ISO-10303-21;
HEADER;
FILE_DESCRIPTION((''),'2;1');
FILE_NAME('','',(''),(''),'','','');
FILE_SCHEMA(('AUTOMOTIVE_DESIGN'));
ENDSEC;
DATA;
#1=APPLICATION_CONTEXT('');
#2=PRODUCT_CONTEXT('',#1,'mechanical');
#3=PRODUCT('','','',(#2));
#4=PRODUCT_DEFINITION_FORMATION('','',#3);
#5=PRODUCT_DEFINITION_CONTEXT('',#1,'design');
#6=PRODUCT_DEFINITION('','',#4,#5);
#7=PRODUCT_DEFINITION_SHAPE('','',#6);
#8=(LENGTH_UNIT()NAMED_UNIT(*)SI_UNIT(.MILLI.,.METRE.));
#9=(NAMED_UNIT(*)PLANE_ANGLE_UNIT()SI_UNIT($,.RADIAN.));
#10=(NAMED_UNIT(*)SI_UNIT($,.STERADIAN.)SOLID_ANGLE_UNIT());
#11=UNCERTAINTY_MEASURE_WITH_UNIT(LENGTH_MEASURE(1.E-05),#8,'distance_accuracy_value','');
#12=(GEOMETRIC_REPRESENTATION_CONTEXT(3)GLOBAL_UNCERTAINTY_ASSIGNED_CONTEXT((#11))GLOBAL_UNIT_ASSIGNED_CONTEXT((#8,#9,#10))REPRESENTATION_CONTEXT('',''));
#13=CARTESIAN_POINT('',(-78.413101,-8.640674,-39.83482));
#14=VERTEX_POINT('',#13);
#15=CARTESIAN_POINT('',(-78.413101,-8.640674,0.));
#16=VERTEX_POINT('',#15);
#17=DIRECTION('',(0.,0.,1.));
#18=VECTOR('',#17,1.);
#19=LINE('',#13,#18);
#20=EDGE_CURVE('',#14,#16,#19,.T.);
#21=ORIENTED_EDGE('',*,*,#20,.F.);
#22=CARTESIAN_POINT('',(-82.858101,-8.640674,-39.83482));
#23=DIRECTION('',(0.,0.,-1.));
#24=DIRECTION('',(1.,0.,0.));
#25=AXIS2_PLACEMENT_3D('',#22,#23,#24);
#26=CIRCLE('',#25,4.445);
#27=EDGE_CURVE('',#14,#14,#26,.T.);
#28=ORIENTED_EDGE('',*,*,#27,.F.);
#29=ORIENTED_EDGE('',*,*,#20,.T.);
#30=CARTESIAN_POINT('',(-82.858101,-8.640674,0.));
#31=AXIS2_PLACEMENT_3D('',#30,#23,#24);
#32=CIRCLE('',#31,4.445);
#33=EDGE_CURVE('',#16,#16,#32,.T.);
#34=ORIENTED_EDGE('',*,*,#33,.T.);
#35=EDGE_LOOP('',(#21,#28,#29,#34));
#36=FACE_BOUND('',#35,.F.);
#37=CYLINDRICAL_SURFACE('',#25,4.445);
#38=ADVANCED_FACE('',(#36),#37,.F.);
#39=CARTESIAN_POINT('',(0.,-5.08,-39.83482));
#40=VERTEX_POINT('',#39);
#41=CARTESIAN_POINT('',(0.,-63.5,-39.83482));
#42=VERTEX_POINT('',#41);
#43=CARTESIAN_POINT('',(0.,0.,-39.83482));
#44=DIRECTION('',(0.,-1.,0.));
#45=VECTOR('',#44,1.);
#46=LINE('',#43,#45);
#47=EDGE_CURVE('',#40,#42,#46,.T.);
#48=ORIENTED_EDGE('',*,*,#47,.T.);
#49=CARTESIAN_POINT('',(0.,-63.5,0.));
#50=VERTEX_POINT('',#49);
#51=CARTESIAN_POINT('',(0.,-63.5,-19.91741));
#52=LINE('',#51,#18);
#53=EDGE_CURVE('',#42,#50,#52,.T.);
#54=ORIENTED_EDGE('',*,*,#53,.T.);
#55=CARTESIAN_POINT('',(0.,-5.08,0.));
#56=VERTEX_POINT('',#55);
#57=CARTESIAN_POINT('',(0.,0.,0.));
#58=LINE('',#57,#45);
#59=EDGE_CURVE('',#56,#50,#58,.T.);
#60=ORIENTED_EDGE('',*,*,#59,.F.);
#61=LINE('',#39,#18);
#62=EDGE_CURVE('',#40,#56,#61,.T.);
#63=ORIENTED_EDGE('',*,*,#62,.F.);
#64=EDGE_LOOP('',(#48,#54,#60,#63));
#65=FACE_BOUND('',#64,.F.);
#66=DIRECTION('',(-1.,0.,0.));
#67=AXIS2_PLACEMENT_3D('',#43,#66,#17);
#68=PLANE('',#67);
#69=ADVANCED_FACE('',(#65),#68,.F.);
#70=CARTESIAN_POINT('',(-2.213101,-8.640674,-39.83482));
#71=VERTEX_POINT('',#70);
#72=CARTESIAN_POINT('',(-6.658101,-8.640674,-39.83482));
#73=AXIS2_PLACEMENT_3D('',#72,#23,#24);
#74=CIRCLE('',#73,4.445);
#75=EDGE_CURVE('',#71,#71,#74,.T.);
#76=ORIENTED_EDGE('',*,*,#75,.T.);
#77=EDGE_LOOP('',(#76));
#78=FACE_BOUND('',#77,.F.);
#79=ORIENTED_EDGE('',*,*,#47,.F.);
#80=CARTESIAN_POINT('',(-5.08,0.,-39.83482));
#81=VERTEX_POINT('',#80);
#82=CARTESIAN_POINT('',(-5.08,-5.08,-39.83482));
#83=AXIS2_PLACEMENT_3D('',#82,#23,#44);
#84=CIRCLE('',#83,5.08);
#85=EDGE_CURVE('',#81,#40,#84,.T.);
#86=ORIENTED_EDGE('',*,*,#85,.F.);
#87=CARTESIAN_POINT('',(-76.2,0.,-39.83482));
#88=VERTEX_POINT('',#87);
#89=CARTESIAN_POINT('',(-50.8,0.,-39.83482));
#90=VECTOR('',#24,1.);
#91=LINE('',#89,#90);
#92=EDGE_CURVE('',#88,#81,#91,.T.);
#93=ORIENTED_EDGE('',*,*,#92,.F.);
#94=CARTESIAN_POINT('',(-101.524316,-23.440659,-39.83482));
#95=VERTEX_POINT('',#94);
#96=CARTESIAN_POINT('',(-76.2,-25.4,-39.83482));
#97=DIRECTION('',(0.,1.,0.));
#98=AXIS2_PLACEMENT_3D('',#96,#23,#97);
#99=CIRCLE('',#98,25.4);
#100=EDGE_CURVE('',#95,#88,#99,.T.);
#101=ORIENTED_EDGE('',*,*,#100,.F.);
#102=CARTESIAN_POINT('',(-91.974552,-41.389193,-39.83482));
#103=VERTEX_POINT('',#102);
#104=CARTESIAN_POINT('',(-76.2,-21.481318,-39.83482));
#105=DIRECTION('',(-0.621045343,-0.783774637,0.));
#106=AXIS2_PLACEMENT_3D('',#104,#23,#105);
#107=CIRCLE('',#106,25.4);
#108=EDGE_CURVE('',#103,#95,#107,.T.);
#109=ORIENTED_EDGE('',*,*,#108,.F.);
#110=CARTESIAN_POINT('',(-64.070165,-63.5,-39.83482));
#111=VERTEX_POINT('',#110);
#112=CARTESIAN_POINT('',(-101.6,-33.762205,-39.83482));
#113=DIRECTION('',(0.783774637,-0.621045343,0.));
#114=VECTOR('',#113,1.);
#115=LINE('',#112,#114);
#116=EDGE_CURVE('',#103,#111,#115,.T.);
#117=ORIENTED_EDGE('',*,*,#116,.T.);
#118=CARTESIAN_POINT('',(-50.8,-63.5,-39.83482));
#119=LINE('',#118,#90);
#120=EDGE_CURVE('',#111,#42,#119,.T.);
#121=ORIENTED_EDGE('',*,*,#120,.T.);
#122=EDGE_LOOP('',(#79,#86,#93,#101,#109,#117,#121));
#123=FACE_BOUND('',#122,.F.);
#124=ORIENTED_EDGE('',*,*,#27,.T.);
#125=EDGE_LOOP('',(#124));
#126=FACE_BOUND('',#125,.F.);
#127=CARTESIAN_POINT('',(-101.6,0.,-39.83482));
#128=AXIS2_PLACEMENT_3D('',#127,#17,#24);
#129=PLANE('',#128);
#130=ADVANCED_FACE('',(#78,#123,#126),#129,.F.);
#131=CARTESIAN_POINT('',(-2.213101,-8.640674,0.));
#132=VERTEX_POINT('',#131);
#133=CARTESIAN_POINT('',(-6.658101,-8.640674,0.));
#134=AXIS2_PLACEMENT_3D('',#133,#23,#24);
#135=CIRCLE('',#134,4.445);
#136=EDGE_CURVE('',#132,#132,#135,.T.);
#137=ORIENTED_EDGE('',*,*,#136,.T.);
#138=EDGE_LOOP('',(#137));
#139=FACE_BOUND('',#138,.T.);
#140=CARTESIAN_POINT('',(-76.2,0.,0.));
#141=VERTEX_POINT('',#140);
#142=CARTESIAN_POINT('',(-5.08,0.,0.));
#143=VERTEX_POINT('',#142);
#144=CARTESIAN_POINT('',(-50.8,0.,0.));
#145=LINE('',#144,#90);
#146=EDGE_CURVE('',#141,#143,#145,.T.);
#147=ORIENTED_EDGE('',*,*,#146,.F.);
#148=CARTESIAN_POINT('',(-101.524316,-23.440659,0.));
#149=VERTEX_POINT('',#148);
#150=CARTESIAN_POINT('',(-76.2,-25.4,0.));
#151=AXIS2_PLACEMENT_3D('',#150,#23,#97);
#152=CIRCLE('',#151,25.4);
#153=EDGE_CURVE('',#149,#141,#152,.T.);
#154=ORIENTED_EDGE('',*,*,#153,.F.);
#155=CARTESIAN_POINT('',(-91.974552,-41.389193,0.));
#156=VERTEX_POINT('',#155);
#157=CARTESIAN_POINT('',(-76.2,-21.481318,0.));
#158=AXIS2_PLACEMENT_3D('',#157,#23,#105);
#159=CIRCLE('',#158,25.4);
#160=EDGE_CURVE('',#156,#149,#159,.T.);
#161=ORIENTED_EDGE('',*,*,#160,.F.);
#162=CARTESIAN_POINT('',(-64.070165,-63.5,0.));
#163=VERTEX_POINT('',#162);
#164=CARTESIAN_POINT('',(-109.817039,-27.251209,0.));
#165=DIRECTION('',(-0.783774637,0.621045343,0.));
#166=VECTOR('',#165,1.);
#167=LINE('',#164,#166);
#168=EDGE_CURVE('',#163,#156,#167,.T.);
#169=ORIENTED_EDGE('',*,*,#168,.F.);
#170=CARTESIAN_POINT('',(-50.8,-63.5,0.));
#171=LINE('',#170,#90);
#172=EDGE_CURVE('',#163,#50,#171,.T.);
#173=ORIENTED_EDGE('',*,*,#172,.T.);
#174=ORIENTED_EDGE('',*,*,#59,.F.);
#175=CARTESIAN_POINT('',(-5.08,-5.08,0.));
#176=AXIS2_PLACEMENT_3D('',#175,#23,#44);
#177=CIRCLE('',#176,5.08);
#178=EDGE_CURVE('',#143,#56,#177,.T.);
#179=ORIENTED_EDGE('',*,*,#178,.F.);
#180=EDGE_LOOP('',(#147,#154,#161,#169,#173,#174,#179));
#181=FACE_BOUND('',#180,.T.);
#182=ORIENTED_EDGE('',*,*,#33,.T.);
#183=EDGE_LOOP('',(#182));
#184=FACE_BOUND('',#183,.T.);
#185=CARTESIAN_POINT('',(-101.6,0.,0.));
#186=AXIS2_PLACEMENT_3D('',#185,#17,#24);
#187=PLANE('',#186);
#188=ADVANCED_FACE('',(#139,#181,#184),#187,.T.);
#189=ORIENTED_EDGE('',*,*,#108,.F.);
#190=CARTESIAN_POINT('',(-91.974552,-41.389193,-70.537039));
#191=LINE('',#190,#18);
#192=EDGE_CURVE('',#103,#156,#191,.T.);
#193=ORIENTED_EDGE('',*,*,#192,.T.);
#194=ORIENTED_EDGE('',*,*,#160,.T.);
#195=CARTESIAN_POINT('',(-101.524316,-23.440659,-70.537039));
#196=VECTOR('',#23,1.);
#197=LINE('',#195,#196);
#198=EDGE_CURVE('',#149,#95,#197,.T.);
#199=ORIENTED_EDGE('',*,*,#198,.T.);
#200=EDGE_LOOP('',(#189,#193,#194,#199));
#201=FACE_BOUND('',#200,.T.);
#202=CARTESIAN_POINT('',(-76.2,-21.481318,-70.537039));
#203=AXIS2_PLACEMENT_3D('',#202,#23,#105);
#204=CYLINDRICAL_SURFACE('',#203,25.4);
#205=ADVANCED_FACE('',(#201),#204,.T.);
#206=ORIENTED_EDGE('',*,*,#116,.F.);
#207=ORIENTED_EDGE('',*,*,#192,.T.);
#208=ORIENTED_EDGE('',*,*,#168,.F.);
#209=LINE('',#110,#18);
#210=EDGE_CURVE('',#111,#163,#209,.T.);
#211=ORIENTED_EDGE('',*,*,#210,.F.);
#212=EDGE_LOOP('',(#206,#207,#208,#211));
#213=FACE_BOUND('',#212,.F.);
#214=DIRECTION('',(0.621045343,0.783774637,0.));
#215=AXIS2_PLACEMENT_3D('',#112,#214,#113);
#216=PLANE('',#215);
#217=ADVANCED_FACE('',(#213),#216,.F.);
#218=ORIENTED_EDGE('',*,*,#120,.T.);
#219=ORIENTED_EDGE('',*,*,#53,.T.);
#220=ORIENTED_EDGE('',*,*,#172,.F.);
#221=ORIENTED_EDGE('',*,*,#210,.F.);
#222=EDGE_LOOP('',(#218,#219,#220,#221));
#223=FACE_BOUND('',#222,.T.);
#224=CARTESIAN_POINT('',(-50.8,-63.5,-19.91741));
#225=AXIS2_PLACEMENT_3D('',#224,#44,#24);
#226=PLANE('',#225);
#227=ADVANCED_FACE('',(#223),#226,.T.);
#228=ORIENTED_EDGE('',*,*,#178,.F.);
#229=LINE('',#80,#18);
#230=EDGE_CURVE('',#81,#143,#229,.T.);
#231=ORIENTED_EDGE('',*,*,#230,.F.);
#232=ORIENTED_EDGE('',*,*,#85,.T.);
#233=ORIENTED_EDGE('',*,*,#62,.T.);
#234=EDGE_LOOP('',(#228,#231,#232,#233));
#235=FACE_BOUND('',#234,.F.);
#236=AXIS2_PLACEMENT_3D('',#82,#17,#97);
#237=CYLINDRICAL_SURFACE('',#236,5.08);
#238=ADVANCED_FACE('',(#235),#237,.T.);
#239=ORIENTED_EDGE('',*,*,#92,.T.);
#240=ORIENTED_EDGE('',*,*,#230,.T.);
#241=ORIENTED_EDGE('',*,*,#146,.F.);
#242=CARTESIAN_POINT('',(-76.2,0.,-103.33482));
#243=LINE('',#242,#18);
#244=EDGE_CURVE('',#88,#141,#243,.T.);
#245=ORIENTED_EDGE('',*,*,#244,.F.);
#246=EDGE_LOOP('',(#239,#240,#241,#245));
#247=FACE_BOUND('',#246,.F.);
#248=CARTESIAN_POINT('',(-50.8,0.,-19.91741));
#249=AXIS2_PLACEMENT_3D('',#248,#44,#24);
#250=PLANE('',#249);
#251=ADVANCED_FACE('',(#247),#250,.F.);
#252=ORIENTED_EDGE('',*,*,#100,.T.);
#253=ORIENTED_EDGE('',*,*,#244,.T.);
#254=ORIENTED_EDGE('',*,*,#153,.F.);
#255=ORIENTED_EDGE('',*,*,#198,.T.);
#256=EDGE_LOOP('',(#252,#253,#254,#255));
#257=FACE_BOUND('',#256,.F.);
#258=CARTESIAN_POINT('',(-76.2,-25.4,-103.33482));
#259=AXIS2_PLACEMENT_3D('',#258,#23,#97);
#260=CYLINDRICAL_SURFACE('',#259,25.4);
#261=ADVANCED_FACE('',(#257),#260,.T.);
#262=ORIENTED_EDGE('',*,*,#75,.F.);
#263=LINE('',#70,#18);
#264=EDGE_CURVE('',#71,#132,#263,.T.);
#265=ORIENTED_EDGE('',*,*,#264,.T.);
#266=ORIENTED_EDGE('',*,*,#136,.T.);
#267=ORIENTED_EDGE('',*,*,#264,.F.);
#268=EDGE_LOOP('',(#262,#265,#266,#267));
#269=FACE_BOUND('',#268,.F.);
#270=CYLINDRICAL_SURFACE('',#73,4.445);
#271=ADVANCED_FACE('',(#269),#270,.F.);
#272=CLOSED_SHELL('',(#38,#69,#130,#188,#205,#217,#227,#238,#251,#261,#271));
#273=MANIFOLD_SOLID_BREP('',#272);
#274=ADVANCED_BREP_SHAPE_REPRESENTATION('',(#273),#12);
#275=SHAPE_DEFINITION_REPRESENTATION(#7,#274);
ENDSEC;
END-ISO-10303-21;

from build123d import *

# Parameters (mm, degrees)
F0_W        = 101.6
F0_H        = 39.83482
F1_DEPTH    = 63.5
F3_DEPTH    = 106.68
F4_T1_DEPTH = 101.2392583659
F4_T3_DEPTH = 166.83482
F5_R        = 5.08
F6_R        = 4.445
F7_DEPTH    = 50.8


# Not quite as in the source:
# - a fillet or chamfer that OpenCascade refuses, or shapes differently, is made with other operations: its cross-section is extruded or revolved along the edge and cut away or added


with BuildPart() as f1:
    # F0 (on Front) → F1 (new body)
    with BuildSketch(Plane.XZ):
        with Locations((-50.8, -19.91741)):
            Rectangle(F0_W, F0_H)
    extrude(amount=F1_DEPTH)

    # F2 (on face) → F3 (cut)
    with BuildSketch(Plane(origin=(0, 0, -39.83482), x_dir=(1, 0, 0), z_dir=(0, 0, -1))):
        Polygon((-101.6, 63.5), (-101.6, 33.7622053921), (-64.0701651573, 63.5), align=None)
    extrude(amount=-F3_DEPTH, mode=Mode.SUBTRACT)

    # F4: fillet of radius 25.4 on 2 edges, made by hand

    # F4_s2 → F4_t1 (cut)
    with BuildSketch(Plane.XY.offset(-70.537039183)):
        with BuildLine():
            ThreePointArc((-91.9745517237, -41.389193495), (-99.0673742894, -32.5376820901), (-101.6, -21.4813177189))
            Line((-101.6, -21.4813177189), (-101.6, -33.7622053921))
            Line((-101.6, -33.7622053921), (-91.9745517237, -41.389193495))
        make_face()
    extrude(amount=F4_T1_DEPTH, mode=Mode.SUBTRACT)

    # F4_s4 → F4_t3 (cut)
    with BuildSketch(Plane.XY.offset(-103.33482)):
        with BuildLine():
            ThreePointArc((-76.2, 0), (-94.1605122421, -7.4394877579), (-101.6, -25.4))
            Line((-101.6, -25.4), (-101.6, 0))
            Line((-101.6, 0), (-76.2, 0))
        make_face()
    extrude(amount=F4_T3_DEPTH, mode=Mode.SUBTRACT)

    # F5
    f5_edges = [f1.edges().sort_by_distance(p)[0] for p in [
        (0, 0, -19.91741),
    ]]
    fillet(f5_edges, radius=F5_R)

    # F6 (on face) → F7 (cut)
    with BuildSketch(Plane(origin=(0, 0, -39.83482), x_dir=(1, 0, 0), z_dir=(0, 0, -1))):
        with Locations((-82.8581005335, 8.6406739429)):
            Circle(F6_R)
        with Locations((-6.6581005335, 8.6406739429)):
            Circle(F6_R)
    extrude(amount=-F7_DEPTH, mode=Mode.SUBTRACT)


solid = f1.part
